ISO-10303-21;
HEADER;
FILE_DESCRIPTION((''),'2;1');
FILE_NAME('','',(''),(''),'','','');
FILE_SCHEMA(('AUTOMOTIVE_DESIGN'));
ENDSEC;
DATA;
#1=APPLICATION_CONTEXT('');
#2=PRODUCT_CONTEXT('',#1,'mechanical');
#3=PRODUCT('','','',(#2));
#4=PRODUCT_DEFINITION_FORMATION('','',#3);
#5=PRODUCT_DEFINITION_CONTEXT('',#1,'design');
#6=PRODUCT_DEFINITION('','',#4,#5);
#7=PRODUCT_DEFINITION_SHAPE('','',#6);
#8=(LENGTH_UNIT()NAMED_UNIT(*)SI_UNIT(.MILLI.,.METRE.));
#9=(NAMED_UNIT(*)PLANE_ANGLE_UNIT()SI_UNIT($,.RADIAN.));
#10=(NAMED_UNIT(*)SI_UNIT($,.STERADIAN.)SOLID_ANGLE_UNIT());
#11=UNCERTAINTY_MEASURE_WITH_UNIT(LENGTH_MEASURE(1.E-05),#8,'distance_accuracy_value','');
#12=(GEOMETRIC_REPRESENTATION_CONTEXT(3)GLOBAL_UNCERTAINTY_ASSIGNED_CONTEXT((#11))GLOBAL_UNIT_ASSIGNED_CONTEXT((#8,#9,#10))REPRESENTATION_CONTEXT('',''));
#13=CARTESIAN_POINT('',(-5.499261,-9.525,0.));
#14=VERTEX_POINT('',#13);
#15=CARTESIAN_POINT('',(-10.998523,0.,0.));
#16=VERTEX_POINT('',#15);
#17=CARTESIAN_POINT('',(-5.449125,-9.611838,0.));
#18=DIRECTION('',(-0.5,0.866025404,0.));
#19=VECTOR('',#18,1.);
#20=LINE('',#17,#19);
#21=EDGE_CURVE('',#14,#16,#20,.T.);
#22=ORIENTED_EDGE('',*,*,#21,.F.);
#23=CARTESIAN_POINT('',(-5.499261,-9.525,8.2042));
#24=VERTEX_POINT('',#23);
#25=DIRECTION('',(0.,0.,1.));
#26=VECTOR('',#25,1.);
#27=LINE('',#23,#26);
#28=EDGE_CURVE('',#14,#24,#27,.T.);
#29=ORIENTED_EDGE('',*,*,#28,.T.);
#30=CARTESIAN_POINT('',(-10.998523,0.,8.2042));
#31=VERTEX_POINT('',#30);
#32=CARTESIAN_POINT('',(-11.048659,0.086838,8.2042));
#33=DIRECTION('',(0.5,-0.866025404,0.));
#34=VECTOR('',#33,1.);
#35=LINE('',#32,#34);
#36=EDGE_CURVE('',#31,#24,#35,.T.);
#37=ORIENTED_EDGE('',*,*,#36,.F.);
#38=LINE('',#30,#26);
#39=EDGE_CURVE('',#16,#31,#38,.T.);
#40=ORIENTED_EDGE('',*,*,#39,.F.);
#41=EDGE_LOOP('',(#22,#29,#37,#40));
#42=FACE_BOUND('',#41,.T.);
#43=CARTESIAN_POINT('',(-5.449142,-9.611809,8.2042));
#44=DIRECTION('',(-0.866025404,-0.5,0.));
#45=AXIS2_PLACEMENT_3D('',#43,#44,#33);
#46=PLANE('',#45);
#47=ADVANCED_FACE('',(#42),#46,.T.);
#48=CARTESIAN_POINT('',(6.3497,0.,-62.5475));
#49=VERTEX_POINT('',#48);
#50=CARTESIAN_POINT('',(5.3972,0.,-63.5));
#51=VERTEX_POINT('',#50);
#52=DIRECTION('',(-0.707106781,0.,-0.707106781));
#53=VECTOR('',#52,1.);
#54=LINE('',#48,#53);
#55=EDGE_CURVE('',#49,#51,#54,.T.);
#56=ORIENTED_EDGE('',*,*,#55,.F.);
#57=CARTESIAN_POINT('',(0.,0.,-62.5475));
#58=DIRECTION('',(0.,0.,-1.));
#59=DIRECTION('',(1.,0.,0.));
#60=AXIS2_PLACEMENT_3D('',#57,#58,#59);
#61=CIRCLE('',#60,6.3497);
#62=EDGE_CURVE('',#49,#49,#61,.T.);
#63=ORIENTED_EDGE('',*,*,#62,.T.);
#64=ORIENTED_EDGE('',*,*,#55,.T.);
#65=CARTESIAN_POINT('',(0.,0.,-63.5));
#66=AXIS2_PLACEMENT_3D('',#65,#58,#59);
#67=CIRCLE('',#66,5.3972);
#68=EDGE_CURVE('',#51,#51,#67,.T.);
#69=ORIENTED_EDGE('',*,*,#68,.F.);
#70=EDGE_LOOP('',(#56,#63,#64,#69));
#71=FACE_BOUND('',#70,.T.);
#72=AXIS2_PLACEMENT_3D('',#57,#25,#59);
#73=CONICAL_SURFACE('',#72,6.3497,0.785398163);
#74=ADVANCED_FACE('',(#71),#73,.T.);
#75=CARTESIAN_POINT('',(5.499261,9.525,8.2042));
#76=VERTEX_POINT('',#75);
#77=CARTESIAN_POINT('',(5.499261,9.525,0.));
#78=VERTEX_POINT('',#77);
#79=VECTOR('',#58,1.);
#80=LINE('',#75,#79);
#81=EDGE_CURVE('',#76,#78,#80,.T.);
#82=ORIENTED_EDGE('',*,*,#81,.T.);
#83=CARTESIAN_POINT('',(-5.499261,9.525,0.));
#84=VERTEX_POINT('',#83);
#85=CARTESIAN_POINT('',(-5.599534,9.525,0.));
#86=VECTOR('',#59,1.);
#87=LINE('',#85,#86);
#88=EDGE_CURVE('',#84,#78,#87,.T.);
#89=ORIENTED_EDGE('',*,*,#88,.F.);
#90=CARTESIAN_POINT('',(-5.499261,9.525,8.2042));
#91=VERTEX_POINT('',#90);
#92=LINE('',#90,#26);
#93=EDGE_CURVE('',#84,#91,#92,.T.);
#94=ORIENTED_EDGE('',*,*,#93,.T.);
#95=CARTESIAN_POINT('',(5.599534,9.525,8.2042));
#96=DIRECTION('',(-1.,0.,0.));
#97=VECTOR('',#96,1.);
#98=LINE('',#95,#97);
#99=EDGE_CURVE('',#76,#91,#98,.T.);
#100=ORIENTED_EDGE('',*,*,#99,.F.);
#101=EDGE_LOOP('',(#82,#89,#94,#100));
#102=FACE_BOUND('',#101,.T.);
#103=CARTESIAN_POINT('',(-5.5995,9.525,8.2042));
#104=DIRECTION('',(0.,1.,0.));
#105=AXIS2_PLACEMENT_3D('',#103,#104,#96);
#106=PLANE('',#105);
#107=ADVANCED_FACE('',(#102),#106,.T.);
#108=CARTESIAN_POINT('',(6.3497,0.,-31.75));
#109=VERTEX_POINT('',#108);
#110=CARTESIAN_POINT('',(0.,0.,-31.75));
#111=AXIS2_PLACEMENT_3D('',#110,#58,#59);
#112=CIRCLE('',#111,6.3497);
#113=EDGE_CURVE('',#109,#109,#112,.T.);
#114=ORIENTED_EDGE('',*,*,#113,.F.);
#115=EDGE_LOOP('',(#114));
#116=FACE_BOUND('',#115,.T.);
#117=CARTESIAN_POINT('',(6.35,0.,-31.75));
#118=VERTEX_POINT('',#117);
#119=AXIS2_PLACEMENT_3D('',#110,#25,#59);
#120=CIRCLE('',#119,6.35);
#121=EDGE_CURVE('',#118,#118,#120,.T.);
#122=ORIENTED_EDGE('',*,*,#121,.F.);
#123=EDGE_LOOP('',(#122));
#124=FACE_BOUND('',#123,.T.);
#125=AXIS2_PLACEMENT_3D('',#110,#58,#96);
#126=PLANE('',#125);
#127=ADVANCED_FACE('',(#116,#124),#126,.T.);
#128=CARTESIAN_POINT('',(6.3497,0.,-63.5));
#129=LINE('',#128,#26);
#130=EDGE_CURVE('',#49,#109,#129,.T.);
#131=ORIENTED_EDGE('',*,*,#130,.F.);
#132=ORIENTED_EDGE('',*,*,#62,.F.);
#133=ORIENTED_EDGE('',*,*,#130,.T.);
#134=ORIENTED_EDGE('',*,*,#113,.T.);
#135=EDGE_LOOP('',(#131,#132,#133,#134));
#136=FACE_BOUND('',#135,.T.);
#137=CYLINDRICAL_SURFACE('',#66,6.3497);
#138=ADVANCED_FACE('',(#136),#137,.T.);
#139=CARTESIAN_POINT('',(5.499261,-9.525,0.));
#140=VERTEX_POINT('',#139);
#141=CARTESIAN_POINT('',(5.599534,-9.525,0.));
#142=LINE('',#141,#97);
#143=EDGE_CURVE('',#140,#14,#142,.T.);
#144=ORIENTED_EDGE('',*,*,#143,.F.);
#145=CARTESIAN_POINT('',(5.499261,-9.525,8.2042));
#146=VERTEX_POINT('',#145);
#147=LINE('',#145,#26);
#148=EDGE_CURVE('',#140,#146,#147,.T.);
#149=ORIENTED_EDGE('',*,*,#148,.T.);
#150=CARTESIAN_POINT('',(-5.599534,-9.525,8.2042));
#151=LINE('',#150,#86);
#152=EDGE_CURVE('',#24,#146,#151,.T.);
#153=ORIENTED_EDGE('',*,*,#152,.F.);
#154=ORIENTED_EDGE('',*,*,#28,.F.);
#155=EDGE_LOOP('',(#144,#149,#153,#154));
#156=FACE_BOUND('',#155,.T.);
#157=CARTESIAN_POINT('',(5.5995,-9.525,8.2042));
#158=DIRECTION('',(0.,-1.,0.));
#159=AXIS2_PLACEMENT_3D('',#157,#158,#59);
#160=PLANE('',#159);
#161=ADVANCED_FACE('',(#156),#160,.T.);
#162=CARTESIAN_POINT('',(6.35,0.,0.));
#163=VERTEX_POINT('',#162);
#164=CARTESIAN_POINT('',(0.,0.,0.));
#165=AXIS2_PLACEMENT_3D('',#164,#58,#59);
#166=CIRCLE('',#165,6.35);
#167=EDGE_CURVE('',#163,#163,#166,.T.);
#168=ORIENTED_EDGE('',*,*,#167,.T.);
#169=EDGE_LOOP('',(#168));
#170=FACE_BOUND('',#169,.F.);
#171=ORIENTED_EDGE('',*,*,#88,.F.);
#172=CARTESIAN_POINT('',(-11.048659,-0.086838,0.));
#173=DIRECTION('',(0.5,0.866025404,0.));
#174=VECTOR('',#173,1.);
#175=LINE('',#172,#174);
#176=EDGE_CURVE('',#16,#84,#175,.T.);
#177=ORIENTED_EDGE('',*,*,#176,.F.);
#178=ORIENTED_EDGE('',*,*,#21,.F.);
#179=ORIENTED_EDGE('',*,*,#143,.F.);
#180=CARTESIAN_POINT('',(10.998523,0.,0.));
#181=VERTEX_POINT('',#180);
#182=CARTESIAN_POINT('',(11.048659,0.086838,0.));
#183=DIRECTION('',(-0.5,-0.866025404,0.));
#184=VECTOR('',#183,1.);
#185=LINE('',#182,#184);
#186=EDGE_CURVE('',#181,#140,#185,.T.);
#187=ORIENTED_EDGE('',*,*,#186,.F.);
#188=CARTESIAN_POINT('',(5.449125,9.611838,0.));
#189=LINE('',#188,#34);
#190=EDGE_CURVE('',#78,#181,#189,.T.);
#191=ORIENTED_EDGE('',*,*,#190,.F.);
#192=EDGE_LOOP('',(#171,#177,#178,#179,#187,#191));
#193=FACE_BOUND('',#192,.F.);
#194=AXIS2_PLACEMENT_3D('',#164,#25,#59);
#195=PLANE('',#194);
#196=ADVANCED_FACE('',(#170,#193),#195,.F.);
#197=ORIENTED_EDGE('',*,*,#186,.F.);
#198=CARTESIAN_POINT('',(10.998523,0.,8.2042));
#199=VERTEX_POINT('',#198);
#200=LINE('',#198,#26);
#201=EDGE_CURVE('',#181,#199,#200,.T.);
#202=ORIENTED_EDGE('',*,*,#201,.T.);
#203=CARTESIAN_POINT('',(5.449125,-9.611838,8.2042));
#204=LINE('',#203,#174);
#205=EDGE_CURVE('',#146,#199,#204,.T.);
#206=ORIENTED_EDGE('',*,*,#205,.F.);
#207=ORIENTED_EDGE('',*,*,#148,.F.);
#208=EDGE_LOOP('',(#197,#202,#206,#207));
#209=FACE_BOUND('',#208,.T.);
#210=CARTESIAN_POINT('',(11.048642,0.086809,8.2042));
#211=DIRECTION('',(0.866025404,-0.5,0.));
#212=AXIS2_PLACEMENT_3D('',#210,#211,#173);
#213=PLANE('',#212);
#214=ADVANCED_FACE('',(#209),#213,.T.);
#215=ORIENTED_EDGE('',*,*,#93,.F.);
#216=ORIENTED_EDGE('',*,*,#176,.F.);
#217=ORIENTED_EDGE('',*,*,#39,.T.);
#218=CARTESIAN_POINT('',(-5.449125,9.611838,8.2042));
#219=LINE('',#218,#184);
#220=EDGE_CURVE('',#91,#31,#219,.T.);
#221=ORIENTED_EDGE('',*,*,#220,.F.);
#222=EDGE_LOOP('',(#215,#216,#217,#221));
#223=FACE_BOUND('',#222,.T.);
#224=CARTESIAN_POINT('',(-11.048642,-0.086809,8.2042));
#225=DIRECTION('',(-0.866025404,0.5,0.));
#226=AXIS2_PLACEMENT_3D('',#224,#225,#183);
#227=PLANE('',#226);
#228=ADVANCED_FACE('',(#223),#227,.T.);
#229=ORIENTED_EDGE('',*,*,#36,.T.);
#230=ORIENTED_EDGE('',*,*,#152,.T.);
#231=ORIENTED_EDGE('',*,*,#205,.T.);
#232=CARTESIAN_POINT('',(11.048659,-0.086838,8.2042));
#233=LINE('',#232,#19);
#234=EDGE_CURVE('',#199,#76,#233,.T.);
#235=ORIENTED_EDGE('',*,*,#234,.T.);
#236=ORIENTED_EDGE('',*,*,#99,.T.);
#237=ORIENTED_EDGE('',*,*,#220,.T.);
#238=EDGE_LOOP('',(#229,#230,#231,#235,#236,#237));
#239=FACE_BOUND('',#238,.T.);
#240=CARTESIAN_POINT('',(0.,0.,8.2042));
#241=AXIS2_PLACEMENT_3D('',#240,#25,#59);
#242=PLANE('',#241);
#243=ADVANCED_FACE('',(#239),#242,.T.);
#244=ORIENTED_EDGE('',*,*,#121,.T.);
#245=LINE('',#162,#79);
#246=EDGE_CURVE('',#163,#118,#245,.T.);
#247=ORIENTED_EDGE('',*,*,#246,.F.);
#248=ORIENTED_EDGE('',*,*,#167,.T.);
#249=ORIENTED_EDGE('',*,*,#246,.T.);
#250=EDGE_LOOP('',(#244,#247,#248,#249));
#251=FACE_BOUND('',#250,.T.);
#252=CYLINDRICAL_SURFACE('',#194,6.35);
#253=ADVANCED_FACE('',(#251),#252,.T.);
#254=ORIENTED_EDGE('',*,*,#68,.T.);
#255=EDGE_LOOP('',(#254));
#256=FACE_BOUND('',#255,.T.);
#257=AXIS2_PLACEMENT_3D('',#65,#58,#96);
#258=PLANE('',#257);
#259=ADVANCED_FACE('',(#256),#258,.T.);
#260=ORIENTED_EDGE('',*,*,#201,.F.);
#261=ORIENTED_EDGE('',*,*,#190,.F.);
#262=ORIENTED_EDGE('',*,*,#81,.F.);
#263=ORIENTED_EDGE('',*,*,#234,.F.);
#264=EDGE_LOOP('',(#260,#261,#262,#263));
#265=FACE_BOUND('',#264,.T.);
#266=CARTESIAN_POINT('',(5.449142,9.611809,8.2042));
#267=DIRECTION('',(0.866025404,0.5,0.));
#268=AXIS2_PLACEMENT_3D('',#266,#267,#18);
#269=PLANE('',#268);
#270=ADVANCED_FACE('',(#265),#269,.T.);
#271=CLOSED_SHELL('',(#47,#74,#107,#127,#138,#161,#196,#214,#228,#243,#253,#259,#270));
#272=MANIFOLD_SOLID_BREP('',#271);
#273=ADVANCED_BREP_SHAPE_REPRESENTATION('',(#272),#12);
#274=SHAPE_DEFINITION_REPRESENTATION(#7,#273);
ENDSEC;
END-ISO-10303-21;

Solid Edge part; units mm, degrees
sketch "Sketch1" plane through (0, 0, 0) normal (0, 0, 1) x (1, 0, 0)
  circle A0 centre (0, 0) radius 11.049
  dimension "D1" = 22.098
extrude "Protrusion1" add sketch "Sketch1" along normal blind 8.2042
sketch "Sketch2" plane through (0, 0, 0) normal (0, 0, -1) x (1, 0, 0)
  circle A0 centre (0, 0) radius 6.35
extrude "Protrusion2" add sketch "Sketch2" along normal blind 63.5
sketch "Sketch3" plane through (0, 0, -63.5) normal (0, 0, -1) x (1, 0, 0)
  circle A0 centre (0, 0) radius 6.3497
extrude "Cutout1" cut sketch "Sketch3" against normal blind 31.75 flip side to cut
chamfer "Chamfer_1" distance 0.9525 angle 45 1 edges at (-6.3497, 0, -63.5)
sketch "Sketch4" plane through (0, 0, 8.2042) normal (0, 0, 1) x (1, 0, 0)
  line L0 (-5.5995, 9.525) -> (5.5995, 9.525)
  dimension "D1" = 19.05
extrude "Cutout2" cut sketch "Sketch4" against normal up to next material side at (0, 9.575, 8.2042)
pattern_circular "Pattern1" count 6 over 360 about axis through (0, 0, 8.2042) along (0, 0, 1) of "Cutout2"
properties part number "24106551"
